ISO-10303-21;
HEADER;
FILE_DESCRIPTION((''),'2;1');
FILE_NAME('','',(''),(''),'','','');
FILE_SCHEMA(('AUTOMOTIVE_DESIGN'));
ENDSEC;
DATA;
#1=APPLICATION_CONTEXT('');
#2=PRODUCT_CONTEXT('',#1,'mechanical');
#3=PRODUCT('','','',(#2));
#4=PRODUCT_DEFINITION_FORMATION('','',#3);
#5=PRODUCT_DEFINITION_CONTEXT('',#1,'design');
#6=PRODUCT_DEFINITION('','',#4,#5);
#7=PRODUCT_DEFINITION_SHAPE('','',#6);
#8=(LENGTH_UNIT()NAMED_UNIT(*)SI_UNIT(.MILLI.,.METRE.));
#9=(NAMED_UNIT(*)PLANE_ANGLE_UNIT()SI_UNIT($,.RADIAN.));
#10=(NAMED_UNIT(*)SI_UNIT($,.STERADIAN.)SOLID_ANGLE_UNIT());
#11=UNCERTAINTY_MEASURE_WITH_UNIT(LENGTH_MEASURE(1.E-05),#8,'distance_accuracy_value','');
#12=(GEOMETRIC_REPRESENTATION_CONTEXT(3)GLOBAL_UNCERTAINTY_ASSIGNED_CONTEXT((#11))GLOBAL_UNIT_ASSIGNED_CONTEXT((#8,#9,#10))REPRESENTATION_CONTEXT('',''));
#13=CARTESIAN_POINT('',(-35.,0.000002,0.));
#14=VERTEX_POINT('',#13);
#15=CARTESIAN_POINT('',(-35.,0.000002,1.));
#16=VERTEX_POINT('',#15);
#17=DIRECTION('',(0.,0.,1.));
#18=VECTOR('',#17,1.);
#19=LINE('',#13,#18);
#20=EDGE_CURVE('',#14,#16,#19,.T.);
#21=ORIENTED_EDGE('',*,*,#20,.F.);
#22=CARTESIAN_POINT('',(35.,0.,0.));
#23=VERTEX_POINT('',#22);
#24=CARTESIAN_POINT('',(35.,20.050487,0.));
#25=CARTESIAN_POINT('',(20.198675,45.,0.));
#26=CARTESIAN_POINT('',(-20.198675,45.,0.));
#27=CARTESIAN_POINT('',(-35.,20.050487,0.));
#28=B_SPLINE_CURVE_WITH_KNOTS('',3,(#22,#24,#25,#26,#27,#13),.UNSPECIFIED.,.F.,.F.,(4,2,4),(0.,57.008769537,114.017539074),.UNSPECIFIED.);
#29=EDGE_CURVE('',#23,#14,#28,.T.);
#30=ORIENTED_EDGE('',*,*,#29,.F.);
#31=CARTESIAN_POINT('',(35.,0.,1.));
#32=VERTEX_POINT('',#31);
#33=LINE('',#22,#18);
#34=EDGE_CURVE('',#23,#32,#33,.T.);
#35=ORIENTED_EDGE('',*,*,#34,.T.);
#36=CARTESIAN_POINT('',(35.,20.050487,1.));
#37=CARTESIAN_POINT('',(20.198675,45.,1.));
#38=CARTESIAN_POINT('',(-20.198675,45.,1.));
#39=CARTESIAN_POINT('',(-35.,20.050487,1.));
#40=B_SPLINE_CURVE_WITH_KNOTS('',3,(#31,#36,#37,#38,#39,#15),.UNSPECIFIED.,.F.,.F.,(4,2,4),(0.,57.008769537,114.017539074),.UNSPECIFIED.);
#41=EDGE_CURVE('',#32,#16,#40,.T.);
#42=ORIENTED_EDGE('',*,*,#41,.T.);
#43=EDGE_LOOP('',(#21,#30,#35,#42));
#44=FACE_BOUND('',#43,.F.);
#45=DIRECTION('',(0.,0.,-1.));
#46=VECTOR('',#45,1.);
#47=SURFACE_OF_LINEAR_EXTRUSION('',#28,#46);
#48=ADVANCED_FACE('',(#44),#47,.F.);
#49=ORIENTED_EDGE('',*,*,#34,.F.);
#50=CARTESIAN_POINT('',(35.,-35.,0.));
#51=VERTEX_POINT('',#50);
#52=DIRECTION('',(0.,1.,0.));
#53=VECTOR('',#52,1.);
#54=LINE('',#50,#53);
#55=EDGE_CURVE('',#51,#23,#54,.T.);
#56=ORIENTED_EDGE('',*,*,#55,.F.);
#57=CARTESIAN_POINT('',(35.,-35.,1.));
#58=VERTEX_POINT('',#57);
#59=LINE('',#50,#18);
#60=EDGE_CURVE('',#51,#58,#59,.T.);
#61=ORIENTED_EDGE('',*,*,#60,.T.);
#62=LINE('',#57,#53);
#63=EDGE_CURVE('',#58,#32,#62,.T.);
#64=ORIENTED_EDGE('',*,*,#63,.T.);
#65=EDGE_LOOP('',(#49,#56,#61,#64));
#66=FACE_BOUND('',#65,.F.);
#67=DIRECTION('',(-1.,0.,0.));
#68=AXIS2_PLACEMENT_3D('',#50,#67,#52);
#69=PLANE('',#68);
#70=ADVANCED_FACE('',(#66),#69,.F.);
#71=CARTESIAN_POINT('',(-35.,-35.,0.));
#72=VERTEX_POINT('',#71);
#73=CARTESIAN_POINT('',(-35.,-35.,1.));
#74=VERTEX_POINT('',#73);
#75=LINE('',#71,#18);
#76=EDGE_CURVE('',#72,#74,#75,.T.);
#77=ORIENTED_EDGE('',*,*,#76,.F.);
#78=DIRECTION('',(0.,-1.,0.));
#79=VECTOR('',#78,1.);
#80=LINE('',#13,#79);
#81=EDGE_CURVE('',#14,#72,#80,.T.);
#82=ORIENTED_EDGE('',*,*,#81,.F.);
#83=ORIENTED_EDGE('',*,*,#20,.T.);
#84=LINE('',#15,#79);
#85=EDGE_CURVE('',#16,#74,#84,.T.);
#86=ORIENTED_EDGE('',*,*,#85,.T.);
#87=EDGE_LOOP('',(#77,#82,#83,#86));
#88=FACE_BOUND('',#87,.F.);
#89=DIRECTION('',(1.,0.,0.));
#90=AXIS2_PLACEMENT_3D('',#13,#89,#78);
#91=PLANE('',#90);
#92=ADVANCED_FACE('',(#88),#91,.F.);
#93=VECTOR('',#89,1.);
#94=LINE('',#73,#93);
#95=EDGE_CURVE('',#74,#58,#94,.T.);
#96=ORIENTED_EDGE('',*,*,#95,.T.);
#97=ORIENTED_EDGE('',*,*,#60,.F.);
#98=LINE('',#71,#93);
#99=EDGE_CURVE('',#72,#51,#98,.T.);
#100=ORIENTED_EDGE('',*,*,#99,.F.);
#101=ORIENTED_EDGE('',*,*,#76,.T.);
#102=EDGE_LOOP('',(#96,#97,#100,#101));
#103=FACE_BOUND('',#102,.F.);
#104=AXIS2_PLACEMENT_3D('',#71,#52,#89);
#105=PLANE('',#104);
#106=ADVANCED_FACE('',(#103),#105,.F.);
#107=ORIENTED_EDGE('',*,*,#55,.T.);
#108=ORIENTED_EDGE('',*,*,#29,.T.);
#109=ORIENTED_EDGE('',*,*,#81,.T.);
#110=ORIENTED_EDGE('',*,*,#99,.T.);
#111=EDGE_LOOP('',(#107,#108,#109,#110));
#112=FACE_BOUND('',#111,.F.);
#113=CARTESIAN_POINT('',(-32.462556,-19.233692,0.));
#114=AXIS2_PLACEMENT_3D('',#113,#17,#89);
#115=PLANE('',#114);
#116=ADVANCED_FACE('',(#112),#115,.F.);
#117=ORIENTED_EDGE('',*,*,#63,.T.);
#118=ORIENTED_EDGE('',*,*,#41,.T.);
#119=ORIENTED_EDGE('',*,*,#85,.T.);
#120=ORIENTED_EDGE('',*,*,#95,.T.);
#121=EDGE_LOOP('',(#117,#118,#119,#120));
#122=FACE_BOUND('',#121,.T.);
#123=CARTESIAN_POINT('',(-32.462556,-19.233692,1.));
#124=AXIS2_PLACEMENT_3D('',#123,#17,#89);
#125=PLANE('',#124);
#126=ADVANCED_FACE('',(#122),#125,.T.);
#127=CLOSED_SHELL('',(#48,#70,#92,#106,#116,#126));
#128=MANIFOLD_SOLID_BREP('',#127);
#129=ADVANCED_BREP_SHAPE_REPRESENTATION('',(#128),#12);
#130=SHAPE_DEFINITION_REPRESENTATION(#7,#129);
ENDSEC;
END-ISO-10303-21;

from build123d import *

# Parameters (mm, degrees)
F1_DEPTH = 1


# Not quite as in the source:
# - ends of sketch curves that miss each other by under 0.0002 mm in the source are joined


with BuildPart() as f1:
    # F0 (on Top) → F1 (new body)
    with BuildSketch(Plane.XY):
        with BuildLine():
            Line((-35, 2.1762e-06), (-35, -35))
            Line((-35, -35), (-27, -35))
            Line((-27, -35), (-27, -22.2710574513))
            ThreePointArc((-27, -22.2710574513), (-32.9393385518, -11.8321585422), (-35, 2.1762e-06))
        make_face()
        with BuildLine():
            Line((-27, -22.2710574513), (-27, -35))
            Line((-27, -35), (1.91e-08, -35))
            ThreePointArc((1.91e-08, -35), (-14.9250291237, -31.6582296671), (-27, -22.2710574513))
        make_face()
        with BuildLine():
            add(Edge.make_bspline(
                [(0, 45), (-20.1986748725, 45), (-35, 20.0504870868), (-35, 2.1762e-06)],
                knots=[0, 0, 0, 0, 57.0087695372, 57.0087695372, 57.0087695372, 57.0087695372], degree=3))
            ThreePointArc((-35, 2.1762e-06), (-28.4666369261, 20.3629708568), (-11.3056830814, 33.1237306181))
            ThreePointArc((-11.3056830814, 33.1237306181), (20.3629699719, 28.4666375592), (35, 0))
            add(Edge.make_bspline(
                [(0, 45), (20.1986748725, 45), (35, 20.0504870868), (35, 0)],
                knots=[0, 0, 0, 0, 57.0087695372, 57.0087695372, 57.0087695372, 57.0087695372], degree=3))
        make_face()
        with BuildLine():
            ThreePointArc((-11.3056830814, 33.1237306181), (-28.4666369261, 20.3629708568), (-35, 2.1762e-06))
            ThreePointArc((-35, 2.1762e-06), (-32.9393385518, -11.8321585422), (-27, -22.2710574513))
            Line((-27, -22.2710574513), (-27, 2.1762e-06))
            add(Edge.make_bspline(
                [(-11.3056830814, 33.1237306181), (-12.4097508436, 32.3488132243), (-15.1414824386, 30.0752135158), (-18.8876274503, 25.5283101279), (-22.422035633, 19.604279738), (-25.0662594291, 13.1120426553), (-26.6478130576, 7.1844788974), (-27.0173066601, 2.7756083867), (-27.018694794, 0.6711028041), (-27, 2.1762e-06)],
                knots=[12.1476935207, 12.1476935207, 12.1476935207, 12.1476935207, 16.189226149, 22.7543847852, 29.7183326598, 36.8091409701, 43.7289829573, 48.0262708445, 50.0404462243, 50.0404462243, 50.0404462243, 50.0404462243], degree=3))
        make_face()
        with BuildLine():
            ThreePointArc((35, 0), (24.7487373483, -24.7487373348), (1.91e-08, -35))
            Line((1.91e-08, -35), (35, -35))
            Line((35, -35), (35, 0))
        make_face()
        with BuildLine():
            ThreePointArc((-27, -22.2710574513), (-14.9250291237, -31.6582296671), (1.91e-08, -35))
            ThreePointArc((1.91e-08, -35), (24.7487373483, -24.7487373348), (35, 0))
            ThreePointArc((35, 0), (20.3629699719, 28.4666375592), (-11.3056830814, 33.1237306181))
            add(Edge.make_bspline(
                [(-11.3056830814, 33.1237306181), (-12.4097508436, 32.3488132243), (-15.1414824386, 30.0752135158), (-18.8876274503, 25.5283101279), (-22.422035633, 19.604279738), (-25.0662594291, 13.1120426553), (-26.6478130576, 7.1844788974), (-27.0173066601, 2.7756083867), (-27.018694794, 0.6711028041), (-27, 2.1762e-06)],
                knots=[12.1476935207, 12.1476935207, 12.1476935207, 12.1476935207, 16.189226149, 22.7543847852, 29.7183326598, 36.8091409701, 43.7289829573, 48.0262708445, 50.0404462243, 50.0404462243, 50.0404462243, 50.0404462243], degree=3))
            Line((-27, 2.1762e-06), (-27, -22.2710574513))
        make_face()
    extrude(amount=F1_DEPTH)


solid = f1.part
